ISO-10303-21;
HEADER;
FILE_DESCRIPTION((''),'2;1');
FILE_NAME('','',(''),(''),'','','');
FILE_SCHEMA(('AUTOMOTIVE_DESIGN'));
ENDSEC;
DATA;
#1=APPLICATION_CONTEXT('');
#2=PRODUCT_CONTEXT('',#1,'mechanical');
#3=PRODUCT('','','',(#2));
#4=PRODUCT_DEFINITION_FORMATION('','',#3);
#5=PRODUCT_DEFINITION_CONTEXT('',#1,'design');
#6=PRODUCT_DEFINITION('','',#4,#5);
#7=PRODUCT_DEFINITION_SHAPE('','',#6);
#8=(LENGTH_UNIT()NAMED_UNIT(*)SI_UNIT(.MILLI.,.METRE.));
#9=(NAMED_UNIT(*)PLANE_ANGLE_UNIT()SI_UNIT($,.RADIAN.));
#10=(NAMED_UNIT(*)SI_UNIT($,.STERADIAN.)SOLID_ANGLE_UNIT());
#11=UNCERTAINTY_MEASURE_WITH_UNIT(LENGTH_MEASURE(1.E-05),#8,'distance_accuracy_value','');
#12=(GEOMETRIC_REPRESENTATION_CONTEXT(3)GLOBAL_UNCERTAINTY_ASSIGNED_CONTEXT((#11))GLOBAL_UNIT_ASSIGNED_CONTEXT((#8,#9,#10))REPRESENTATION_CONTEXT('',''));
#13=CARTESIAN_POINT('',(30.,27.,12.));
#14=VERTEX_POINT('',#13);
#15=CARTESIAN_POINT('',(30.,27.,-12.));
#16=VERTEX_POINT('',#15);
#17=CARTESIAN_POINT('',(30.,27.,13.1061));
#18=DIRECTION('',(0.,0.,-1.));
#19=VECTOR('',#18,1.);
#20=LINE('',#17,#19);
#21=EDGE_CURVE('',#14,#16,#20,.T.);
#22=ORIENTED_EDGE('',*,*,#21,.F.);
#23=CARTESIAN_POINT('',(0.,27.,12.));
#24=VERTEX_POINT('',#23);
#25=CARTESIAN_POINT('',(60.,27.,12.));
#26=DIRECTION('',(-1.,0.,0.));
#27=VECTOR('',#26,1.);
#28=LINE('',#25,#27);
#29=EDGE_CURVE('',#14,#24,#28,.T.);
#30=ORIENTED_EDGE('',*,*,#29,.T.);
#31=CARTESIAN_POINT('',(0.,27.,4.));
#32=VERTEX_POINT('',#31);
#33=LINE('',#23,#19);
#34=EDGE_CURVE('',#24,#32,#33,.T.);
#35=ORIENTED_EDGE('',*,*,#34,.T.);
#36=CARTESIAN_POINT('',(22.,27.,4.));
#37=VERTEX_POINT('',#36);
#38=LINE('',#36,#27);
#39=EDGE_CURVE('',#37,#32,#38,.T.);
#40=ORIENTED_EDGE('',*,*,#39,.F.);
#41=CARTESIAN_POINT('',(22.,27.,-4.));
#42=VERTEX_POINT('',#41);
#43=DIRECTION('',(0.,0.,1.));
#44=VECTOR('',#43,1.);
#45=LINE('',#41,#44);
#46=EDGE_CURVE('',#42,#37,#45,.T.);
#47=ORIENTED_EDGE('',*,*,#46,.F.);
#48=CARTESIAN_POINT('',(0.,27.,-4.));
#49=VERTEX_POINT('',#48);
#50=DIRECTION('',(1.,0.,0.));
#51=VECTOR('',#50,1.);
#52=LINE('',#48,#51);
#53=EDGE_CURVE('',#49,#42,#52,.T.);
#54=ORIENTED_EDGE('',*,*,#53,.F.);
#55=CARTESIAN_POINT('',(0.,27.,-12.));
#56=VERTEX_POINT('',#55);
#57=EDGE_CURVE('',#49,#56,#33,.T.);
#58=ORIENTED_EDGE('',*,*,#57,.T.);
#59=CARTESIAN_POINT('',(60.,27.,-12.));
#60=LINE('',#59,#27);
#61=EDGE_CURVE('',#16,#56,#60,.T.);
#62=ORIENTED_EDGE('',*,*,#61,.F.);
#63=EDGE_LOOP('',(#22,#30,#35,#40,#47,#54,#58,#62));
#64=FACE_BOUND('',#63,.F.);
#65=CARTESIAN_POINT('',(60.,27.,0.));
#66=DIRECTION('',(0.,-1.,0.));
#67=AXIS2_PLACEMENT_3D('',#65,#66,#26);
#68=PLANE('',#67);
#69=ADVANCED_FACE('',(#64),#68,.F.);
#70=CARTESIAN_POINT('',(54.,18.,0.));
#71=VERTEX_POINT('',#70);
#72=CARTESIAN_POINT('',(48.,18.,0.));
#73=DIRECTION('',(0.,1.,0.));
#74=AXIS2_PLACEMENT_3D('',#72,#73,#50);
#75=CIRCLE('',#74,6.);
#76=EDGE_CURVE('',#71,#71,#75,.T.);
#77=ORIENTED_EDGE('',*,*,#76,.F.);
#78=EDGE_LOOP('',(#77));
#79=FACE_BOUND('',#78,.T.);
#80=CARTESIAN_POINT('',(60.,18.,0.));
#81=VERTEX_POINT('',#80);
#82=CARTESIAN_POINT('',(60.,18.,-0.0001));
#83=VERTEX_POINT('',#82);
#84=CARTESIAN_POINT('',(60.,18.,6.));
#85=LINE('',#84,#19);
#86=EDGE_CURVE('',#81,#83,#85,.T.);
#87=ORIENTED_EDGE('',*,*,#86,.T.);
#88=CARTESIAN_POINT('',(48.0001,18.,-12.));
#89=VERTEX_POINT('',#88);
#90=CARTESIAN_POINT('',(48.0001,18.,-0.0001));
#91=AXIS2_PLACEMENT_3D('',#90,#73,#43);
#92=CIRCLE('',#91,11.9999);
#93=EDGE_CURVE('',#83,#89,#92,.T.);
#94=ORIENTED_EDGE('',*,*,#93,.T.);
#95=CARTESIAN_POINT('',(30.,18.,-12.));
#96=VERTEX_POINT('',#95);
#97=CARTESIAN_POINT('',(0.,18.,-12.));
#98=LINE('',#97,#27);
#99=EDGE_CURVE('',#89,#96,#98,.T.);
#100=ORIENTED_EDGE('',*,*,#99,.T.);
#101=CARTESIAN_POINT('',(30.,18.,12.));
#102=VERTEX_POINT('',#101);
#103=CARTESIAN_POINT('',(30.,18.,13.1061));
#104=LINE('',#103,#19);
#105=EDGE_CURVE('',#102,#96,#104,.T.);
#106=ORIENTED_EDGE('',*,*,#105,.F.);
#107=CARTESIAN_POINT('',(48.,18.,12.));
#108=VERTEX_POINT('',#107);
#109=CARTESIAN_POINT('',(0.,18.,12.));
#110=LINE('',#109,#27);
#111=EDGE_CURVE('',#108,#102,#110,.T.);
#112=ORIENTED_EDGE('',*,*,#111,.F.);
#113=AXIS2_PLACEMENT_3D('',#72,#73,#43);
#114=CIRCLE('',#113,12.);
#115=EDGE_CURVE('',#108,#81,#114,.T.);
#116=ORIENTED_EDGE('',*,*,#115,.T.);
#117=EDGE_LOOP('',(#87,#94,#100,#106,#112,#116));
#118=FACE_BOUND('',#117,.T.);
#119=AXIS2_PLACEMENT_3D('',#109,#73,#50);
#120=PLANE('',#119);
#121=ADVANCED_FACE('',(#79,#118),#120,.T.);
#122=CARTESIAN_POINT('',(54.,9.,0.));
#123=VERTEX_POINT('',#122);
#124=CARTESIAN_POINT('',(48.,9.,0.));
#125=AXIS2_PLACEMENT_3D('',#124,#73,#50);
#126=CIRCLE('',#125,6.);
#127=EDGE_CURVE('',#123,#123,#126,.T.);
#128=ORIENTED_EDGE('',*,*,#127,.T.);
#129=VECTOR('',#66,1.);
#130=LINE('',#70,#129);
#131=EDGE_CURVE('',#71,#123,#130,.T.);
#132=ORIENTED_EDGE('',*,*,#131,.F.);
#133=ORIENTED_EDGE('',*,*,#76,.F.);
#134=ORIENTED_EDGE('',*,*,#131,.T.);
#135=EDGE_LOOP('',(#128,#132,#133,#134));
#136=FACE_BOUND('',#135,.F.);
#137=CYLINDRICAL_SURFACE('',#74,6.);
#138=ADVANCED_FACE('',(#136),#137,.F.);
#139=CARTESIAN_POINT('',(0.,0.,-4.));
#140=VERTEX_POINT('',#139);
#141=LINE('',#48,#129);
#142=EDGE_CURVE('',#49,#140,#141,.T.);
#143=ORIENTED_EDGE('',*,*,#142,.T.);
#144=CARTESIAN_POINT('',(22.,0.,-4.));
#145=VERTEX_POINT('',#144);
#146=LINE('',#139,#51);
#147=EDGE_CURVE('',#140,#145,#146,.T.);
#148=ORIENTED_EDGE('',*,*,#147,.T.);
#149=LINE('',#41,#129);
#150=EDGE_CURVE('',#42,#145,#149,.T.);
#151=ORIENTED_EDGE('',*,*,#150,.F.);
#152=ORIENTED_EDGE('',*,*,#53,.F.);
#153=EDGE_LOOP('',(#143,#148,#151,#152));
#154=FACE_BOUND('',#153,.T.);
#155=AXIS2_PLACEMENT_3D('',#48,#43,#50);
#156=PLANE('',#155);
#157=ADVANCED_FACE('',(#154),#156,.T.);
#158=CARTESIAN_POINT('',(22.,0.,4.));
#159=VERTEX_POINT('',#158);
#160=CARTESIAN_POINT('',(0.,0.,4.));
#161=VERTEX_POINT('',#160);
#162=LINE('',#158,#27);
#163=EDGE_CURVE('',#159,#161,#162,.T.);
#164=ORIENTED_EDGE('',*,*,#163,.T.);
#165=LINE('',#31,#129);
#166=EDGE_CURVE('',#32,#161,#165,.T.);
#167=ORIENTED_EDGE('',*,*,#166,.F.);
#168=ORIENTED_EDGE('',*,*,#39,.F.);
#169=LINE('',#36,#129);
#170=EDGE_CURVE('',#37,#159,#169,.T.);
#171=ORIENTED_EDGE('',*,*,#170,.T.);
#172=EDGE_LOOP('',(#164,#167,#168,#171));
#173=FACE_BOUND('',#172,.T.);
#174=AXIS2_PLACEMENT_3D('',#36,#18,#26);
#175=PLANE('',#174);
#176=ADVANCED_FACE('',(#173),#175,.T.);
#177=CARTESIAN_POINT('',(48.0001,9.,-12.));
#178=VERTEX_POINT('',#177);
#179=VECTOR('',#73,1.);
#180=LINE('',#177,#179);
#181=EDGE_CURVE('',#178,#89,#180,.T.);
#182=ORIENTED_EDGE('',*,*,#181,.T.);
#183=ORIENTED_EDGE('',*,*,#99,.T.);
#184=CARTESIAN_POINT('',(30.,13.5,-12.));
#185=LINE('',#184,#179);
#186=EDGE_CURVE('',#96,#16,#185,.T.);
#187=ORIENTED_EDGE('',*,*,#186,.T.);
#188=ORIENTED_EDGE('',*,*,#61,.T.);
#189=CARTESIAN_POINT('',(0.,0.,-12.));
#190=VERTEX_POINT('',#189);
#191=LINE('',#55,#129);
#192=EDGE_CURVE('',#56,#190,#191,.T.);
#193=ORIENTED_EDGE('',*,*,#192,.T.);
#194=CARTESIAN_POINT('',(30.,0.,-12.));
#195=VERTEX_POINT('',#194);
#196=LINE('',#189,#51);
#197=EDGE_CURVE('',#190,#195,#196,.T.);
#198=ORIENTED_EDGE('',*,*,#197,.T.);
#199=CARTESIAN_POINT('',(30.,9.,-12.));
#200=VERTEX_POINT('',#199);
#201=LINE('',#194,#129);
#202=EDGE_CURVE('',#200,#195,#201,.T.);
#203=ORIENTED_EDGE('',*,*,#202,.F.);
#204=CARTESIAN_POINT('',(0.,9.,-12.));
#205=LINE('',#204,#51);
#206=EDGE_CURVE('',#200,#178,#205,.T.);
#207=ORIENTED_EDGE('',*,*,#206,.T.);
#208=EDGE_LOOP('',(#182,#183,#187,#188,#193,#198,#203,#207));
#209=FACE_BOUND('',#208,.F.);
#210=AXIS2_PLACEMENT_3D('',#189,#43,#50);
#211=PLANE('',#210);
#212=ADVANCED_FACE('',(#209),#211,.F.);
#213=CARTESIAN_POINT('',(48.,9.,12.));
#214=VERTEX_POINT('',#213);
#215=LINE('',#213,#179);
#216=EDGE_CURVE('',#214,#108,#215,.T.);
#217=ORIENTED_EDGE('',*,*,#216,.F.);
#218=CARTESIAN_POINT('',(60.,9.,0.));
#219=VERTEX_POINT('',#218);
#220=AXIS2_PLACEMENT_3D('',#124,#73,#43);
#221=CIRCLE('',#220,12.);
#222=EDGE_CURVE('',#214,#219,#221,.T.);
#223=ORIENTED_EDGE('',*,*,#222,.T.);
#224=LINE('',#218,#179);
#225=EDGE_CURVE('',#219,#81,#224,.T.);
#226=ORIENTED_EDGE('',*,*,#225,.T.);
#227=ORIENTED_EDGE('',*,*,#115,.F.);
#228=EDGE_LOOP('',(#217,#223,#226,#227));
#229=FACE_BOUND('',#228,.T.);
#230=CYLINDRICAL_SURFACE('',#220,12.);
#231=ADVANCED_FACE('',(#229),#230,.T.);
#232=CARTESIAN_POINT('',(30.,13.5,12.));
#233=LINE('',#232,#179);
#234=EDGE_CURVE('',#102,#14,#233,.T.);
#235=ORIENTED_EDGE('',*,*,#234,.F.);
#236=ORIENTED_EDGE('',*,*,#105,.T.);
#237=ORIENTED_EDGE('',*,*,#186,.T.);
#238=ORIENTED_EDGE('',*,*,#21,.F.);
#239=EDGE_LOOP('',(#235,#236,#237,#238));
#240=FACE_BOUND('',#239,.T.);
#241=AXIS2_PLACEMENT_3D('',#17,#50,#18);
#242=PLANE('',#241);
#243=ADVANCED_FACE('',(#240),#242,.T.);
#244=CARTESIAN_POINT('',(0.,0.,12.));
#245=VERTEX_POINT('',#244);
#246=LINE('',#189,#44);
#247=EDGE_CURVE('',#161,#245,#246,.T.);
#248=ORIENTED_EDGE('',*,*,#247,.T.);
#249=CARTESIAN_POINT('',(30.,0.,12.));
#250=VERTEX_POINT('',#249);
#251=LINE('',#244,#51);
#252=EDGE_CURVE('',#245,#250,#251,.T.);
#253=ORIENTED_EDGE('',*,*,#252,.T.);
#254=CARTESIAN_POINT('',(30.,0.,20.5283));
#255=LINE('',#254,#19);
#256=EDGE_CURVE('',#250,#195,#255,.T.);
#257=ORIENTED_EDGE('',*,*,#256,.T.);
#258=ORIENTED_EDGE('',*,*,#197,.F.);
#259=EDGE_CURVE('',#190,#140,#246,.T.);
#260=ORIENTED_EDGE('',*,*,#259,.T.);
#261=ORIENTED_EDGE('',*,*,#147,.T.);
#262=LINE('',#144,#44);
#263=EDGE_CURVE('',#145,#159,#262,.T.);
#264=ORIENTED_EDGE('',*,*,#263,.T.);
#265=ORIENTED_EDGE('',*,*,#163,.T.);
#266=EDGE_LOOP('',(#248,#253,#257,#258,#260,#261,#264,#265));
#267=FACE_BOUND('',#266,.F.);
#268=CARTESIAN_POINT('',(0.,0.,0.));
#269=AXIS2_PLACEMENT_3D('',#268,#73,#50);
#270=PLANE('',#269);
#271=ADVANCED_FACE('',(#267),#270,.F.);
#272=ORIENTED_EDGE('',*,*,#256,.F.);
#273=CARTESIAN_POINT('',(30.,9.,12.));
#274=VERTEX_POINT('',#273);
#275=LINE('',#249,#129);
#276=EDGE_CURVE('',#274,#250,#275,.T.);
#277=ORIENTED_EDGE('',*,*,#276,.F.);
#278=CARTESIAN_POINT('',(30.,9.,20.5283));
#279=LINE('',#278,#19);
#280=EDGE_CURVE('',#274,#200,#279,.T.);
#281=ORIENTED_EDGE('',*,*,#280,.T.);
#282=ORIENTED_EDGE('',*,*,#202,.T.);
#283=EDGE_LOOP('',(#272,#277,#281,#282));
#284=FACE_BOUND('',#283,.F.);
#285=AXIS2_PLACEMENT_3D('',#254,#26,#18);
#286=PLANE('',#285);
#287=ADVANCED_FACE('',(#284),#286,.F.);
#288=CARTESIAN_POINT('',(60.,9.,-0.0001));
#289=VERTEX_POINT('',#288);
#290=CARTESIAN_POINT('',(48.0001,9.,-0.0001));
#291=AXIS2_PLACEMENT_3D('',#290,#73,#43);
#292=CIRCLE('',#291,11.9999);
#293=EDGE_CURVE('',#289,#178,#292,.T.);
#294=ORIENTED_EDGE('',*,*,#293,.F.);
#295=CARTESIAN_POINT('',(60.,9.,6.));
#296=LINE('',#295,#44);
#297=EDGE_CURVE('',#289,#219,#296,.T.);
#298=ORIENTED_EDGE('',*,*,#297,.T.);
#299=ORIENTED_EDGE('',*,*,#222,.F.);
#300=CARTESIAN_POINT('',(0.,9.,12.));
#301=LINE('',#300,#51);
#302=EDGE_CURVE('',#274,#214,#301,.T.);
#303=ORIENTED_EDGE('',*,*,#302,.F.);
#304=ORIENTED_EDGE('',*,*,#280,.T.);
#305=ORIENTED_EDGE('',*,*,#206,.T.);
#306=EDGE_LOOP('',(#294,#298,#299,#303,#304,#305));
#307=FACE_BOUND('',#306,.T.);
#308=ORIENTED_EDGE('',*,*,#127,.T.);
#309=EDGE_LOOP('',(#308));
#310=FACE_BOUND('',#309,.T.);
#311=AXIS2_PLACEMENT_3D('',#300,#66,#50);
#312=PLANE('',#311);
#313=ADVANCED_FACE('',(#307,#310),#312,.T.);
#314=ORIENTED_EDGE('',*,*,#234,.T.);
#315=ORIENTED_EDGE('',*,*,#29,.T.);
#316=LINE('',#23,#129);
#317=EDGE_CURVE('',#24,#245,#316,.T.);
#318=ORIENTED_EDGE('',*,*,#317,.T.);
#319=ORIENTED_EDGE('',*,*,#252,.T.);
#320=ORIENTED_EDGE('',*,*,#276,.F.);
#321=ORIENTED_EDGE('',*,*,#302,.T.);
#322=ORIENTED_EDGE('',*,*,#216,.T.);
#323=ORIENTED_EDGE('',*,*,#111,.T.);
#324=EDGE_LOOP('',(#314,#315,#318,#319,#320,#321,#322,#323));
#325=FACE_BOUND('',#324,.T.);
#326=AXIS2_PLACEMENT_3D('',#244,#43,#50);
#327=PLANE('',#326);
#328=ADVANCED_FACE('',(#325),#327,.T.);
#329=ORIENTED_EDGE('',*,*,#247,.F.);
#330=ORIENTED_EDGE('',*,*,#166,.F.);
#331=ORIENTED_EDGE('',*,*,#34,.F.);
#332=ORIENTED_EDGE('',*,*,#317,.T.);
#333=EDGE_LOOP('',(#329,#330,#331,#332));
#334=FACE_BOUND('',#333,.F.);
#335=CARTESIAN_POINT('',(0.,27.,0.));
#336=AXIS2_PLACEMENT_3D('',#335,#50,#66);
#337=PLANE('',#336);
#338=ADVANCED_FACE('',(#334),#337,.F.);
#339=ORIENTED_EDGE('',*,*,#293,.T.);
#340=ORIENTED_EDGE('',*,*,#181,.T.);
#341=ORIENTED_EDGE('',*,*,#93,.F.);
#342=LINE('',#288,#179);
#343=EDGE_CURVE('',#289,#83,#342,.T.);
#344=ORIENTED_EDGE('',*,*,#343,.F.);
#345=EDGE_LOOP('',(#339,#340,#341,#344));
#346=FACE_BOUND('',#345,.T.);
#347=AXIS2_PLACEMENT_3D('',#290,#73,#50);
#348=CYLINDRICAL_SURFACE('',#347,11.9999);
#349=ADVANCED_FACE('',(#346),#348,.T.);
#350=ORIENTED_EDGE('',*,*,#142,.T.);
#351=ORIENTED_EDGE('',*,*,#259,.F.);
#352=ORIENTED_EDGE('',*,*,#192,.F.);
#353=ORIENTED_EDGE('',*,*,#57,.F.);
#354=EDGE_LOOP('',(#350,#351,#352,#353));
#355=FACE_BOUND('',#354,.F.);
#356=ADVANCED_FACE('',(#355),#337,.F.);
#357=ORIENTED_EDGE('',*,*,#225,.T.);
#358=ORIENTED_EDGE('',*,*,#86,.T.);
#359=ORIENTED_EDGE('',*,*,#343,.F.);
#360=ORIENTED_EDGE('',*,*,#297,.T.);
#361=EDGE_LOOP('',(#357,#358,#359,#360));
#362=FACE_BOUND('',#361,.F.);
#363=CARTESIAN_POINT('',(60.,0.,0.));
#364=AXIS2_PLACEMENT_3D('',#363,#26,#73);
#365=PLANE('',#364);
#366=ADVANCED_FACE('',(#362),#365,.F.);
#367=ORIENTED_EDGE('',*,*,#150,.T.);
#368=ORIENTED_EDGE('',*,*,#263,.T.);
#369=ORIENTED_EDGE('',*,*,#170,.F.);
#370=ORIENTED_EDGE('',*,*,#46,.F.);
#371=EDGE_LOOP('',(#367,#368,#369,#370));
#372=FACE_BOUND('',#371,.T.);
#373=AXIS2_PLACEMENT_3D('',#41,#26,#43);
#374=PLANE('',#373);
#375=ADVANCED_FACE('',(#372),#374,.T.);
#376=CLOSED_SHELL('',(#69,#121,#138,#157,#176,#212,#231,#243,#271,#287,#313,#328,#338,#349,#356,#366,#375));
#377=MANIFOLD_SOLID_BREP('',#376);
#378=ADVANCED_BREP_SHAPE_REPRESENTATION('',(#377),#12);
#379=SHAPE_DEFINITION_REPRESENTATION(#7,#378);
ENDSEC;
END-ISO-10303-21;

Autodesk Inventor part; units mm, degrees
ref_plane "YZ Plane" through (0, 0, 0) normal (1, 0, 0) x (0, 1, 0)
ref_plane "XZ Plane" through (0, 0, 0) normal (0, 1, 0) x (-1, 0, 0)
ref_plane "XY Plane" through (0, 0, 0) normal (0, 0, 1) x (1, 0, 0)
sketch "Sketch1" plane through (0, 0, 0) normal (0, 0, 1) x (1, 0, 0)
  line L0 (0, 0) -> (60, 0)
  line L1 (60, 0) -> (60, 27)
  line L2 (60, 27) -> (0, 27)
  line L3 (0, 27) -> (0, 0)
  dimension "d0" = 27
  dimension "d1" = 60
extrude "Extrusion1" add sketch "Sketch1" along normal mid plane 24
sketch "Sketch2" plane through (0, 27, 12) normal (0, 1, 0) x (1, 0, 0)
  line L0 (30, 26.8485) -> (66.8561, 26.8485)
  line L1 (66.8561, 26.8485) -> (66.8561, -1.1061)
  line L2 (66.8561, -1.1061) -> (30, -1.1061)
  line L3 (30, -1.1061) -> (30, 26.8485)
  line L4 (0, 24) -> (0, 0) projected
  point P0 (0, 12)
  dimension "d4" = 30
extrude "Extrusion2" cut sketch "Sketch2" against normal blind 9
sketch "Sketch3" plane through (0, 0, 12) normal (0, -1, 0) x (1, 0, 0)
  line L0 (64.8246, 8.5283) -> (30, 8.5283)
  line L1 (30, 8.5283) -> (30, -38.3826)
  line L2 (30, -38.3826) -> (64.8246, -38.3826)
  line L3 (64.8246, -38.3826) -> (64.8246, 8.5283)
  line L4 (0, -24) -> (0, 0) projected
  point P0 (0, -12)
  dimension "d7" = 30
extrude "Extrusion3" cut sketch "Sketch3" against normal blind 9
sketch "Sketch4" plane through (0, 18, 12) normal (0, 1, 0) x (1, 0, 0)
  circle A0 centre (48, 12) radius 6
  line L0 (30, 0) -> (30, 24) projected
  line L1 (30, 24) -> (60, 24) projected
  point P0 (0, 12)
  dimension "d10" = 12
  dimension "d11" = 18
  dimension "d12" = 12
extrude "Extrusion4" cut sketch "Sketch4" against normal blind 9
fillet "Fillet1" radius 12 1 edges at (60, 13.5, 12)
fillet "Fillet2" radius 12 1 edges at (60, 13.5, -12)
sketch "Sketch5" plane through (0, 27, 12) normal (0, 1, 0) x (1, 0, 0)
  line L0 (0, 16) -> (22, 16)
  line L1 (22, 16) -> (22, 8)
  line L2 (22, 8) -> (0, 8)
  line L3 (0, 8) -> (0, 16)
  line L4 (0, 24) -> (30, 24) projected
  line L5 (30, 0) -> (0, 0) projected
  line L6 (30, 0) -> (30, 24) projected
  point P0 (0, 12)
  dimension "d17" = 8
  dimension "d18" = 8
  dimension "d19" = 8
  dimension "d20" = 22
extrude "Extrusion5" cut sketch "Sketch5" against normal blind 27
